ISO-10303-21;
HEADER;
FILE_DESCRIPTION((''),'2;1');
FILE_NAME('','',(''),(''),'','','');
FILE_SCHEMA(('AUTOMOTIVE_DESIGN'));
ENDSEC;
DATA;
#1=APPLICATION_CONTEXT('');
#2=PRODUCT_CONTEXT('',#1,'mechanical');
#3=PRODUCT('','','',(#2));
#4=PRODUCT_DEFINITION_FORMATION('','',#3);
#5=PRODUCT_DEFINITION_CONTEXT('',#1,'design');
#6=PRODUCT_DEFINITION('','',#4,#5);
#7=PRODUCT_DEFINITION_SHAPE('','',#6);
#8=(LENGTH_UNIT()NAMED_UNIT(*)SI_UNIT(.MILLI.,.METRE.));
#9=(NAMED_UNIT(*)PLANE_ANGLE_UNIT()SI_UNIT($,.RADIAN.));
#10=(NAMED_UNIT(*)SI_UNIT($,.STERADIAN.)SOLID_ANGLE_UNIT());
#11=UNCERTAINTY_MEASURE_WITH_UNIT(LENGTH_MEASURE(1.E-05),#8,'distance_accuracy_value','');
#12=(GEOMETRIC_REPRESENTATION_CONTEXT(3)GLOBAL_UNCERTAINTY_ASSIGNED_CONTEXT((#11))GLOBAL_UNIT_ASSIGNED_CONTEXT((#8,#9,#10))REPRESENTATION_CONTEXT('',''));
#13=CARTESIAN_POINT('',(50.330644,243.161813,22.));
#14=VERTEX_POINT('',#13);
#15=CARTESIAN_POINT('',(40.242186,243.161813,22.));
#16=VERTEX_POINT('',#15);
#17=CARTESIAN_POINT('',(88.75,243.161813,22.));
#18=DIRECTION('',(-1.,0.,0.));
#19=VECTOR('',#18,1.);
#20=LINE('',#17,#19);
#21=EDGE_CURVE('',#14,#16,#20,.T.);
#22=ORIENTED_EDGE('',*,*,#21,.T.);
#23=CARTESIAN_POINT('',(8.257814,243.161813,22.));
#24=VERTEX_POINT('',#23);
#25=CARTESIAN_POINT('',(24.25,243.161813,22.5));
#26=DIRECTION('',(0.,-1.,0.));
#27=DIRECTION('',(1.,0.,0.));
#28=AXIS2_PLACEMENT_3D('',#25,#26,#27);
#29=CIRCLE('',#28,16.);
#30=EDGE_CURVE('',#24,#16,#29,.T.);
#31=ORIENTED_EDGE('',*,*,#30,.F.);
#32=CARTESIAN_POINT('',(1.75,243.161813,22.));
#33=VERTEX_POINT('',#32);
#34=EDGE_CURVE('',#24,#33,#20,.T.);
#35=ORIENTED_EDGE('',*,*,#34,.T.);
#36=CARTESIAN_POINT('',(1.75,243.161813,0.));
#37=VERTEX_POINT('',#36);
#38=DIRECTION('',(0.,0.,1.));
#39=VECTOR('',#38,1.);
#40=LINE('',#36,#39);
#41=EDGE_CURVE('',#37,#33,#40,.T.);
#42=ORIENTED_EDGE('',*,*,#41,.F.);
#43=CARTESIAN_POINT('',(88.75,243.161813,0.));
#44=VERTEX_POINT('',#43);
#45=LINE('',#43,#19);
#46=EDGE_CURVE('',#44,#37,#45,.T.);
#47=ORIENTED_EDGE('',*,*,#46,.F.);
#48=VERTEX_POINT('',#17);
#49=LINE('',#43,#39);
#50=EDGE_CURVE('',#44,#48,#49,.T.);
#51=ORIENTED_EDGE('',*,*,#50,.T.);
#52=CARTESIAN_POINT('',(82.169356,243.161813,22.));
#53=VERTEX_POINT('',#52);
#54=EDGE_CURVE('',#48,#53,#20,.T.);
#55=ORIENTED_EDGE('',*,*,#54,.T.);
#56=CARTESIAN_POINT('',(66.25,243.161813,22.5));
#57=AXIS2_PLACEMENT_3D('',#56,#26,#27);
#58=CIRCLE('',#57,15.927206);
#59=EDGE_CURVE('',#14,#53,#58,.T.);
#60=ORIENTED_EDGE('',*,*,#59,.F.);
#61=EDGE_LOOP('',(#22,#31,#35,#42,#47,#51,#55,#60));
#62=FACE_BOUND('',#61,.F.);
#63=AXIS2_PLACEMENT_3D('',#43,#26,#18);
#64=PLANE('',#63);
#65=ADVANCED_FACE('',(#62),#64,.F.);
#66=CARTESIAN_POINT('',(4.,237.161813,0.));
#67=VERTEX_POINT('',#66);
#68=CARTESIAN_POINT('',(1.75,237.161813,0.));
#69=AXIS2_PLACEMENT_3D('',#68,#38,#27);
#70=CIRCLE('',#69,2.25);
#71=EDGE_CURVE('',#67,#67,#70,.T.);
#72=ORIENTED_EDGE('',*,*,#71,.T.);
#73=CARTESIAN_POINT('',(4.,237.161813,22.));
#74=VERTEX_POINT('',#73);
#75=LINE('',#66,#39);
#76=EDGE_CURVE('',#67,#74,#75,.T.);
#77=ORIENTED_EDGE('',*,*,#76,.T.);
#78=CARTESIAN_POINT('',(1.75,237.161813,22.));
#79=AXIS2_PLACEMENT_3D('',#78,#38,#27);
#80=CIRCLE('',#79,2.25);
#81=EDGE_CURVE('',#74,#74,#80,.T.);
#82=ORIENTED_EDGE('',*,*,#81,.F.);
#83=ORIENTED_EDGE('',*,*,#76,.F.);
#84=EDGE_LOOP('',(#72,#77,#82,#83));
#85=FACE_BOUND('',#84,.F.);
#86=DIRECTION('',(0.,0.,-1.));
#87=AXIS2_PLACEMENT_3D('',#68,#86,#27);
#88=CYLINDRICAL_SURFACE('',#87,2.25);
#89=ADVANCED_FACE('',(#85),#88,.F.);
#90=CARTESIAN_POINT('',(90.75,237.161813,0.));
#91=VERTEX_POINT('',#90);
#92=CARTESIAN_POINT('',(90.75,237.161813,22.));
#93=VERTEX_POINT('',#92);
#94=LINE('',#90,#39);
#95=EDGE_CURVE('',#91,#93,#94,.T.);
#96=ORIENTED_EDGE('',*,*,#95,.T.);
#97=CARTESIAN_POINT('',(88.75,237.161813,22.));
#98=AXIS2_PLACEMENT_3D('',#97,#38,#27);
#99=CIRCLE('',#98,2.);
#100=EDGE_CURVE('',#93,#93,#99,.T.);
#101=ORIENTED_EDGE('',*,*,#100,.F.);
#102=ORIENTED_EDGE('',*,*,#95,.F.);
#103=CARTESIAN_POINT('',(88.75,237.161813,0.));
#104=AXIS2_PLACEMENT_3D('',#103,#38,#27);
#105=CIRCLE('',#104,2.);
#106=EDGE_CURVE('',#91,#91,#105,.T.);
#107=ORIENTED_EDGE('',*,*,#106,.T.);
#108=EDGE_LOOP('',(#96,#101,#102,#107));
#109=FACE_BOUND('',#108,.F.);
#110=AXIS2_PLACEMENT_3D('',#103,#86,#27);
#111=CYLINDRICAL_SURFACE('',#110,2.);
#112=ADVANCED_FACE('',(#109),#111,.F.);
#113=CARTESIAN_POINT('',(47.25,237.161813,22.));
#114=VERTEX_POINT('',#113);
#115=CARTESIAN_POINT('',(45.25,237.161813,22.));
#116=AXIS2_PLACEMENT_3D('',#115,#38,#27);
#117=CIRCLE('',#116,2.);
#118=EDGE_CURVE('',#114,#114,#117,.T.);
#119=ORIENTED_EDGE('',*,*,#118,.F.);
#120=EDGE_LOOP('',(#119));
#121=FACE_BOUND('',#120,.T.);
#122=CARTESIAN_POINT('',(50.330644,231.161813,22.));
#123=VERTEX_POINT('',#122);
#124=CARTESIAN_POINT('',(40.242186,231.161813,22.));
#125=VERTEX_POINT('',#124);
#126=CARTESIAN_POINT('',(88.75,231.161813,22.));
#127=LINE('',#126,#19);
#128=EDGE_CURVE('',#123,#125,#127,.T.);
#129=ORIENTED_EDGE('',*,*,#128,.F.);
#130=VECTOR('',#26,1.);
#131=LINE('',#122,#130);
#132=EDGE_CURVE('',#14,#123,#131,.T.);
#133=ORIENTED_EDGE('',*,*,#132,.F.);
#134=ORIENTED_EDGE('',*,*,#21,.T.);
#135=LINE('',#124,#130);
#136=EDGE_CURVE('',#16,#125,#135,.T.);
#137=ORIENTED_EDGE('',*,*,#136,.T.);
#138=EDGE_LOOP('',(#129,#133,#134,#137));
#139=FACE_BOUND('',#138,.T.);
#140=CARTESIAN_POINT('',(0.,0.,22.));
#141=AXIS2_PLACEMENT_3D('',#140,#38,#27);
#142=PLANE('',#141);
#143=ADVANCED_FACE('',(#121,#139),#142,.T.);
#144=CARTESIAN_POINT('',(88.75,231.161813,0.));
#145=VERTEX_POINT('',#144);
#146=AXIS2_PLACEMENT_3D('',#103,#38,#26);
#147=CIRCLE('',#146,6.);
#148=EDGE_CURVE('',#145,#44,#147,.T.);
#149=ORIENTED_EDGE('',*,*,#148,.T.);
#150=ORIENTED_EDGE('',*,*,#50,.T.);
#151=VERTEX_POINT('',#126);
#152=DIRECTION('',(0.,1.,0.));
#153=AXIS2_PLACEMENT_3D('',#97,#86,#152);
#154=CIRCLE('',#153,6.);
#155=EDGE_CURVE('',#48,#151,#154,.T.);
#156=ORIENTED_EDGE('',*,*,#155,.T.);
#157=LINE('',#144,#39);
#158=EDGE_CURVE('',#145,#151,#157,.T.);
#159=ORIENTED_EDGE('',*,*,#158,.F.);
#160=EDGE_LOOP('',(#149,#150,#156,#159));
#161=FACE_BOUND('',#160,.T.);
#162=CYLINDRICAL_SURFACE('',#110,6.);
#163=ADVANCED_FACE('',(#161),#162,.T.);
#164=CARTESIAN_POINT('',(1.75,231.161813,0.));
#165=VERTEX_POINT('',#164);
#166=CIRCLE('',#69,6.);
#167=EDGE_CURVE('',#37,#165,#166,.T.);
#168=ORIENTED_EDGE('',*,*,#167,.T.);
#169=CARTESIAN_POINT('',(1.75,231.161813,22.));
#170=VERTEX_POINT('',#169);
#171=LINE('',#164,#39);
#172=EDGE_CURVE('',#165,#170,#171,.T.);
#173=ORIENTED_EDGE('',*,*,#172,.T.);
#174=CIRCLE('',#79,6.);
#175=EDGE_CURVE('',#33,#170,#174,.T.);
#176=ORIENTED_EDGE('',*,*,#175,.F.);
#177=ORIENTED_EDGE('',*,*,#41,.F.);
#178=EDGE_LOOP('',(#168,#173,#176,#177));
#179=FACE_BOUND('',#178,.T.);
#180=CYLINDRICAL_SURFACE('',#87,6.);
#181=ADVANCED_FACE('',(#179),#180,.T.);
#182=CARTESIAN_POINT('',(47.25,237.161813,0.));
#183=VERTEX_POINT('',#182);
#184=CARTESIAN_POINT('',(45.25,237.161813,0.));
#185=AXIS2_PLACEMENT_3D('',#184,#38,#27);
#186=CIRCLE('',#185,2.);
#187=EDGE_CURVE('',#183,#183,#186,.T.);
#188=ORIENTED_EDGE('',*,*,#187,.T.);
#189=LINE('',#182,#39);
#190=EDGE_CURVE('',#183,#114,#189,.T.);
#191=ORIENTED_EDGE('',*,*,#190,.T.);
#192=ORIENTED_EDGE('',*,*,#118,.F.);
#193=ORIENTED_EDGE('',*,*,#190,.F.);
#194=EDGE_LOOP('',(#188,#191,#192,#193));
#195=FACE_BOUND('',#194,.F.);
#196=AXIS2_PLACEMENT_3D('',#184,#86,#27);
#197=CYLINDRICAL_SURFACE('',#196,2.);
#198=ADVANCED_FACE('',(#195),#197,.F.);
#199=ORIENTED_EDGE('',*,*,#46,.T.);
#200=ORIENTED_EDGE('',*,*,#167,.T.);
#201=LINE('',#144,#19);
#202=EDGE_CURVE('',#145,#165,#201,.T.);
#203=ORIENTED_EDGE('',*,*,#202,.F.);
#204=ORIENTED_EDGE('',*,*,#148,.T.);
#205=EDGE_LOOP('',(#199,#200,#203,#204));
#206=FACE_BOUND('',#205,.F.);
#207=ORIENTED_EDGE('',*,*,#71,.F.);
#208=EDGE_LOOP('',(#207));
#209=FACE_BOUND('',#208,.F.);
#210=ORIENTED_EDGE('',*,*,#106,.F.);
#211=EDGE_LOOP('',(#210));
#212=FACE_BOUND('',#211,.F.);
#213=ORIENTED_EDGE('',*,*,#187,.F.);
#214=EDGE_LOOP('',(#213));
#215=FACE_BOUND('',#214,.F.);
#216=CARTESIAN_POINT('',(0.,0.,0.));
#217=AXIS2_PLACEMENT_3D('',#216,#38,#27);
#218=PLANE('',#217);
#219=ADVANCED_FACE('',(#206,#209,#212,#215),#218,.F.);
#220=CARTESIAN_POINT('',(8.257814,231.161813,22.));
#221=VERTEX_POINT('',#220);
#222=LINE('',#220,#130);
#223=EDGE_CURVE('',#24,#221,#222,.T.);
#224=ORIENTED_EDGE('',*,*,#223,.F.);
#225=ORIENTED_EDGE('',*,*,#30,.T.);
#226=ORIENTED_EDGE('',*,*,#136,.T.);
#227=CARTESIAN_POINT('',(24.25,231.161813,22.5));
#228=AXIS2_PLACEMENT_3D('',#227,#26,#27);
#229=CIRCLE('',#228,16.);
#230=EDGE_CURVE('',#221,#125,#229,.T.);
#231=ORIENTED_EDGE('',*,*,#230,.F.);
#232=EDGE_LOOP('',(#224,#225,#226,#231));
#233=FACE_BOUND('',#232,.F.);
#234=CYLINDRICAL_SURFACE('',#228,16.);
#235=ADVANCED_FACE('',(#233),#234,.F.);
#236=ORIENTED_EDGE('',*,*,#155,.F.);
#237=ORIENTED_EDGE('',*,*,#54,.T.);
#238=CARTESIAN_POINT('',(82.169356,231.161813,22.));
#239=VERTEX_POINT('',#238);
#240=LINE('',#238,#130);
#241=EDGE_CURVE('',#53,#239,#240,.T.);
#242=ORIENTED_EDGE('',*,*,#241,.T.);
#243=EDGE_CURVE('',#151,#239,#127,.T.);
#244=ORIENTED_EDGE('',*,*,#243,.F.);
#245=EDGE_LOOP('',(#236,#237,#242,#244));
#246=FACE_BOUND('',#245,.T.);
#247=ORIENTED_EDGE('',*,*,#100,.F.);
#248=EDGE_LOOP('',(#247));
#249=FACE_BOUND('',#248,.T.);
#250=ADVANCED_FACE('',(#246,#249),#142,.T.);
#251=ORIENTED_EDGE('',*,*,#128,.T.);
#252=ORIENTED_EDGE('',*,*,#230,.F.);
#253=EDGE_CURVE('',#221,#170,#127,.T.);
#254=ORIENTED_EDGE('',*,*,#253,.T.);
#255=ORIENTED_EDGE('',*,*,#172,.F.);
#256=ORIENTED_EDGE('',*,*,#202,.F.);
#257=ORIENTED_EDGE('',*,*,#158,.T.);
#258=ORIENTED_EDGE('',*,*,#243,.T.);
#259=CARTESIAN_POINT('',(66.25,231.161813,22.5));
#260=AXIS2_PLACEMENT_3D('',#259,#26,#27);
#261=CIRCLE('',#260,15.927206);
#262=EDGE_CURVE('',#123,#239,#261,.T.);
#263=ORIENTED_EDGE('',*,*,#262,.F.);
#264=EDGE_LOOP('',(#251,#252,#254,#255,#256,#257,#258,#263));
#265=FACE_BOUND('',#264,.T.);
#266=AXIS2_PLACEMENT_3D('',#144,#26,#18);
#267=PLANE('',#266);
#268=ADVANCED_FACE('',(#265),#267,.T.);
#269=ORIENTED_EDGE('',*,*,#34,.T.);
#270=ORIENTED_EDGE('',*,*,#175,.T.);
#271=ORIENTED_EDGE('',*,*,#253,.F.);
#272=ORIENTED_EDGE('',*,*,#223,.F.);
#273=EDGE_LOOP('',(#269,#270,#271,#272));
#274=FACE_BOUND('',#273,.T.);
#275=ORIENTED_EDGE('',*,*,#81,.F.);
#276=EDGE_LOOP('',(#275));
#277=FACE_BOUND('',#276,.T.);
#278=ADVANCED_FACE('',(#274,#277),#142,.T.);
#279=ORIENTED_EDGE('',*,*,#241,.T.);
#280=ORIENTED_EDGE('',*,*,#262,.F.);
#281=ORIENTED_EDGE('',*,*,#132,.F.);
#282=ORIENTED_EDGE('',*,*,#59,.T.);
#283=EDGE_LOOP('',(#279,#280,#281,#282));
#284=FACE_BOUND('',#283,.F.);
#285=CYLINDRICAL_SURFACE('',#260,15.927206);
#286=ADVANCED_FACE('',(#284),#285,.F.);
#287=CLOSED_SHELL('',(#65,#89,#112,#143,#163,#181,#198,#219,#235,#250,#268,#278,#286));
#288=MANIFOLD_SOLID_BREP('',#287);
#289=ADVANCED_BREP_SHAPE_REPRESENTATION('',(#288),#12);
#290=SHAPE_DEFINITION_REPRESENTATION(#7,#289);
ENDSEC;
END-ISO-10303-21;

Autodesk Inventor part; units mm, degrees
ref_plane "YZ Plane" through (0, 0, 0) normal (1, 0, 0) x (0, 1, 0)
ref_plane "XZ Plane" through (0, 0, 0) normal (0, 1, 0) x (-1, 0, 0)
ref_plane "XY Plane" through (0, 0, 0) normal (0, 0, 1) x (1, 0, 0)
sketch "Szkic1" plane through (0, 0, 0) normal (0, 0, 1) x (1, 0, 0)
  arc A0 (85.75, 216.779101) -> (95.75, 226.779101) centre (85.75, 226.779101) ccw
  line L0 (85.75, 216.779101) -> (83.25, 216.779101)
  arc A1 (83.25, 216.779101) -> (53.25, 186.779101) centre (83.25, 186.779101) ccw
  line L1 (53.25, 186.779101) -> (53.25, -39)
  arc A2 (46.25, -46) -> (53.25, -39) centre (46.25, -39) ccw
  line L2 (-1.25, -46) -> (46.25, -46)
  arc A3 (-8.916667, 45.356612) -> (-1.25, -46) centre (-1.25, 0) ccw
  arc A4 (-8.916667, 45.356612) -> (-7.25, 47.328638) centre (-9.25, 47.328638) ccw
  line L3 (-7.25, 400) -> (-7.25, 47.328638)
  arc A5 (27.038691, 446) -> (-7.25, 400) centre (40.75, 400) ccw
  line L4 (85.75, 446) -> (27.038691, 446)
  arc A6 (95.75, 436) -> (85.75, 446) centre (85.75, 436) ccw
  line L5 (95.75, 226.779101) -> (95.75, 436)
  circle A7 centre (46.75, 361.06) radius 2
  circle A8 centre (40.75, 400) radius 23.333333
  circle A9 centre (85.75, 438.7) radius 2
  circle A10 centre (85.75, 361.06) radius 2
  circle A11 centre (46.75, 438.7) radius 2
  circle A12 centre (-10.958284, -29.879026) radius 2.1
  circle A13 centre (-32.666667, 0) radius 2.1
  circle A14 centre (24.166617, -18.466253) radius 2.1
  circle A15 centre (-10.958284, 29.879026) radius 2.1
  circle A16 centre (24.166617, 18.466253) radius 2.1
  circle A17 centre (-1.25, 0) radius 23.333333
  circle A18 centre (1.75, 302.77336) radius 2.25
  circle A19 centre (1.75, 237.161813) radius 2.25
  circle A20 centre (43.75, 127.673594) radius 2
  circle A21 centre (4.75, -38.7) radius 2
  circle A22 centre (4.75, 38.94) radius 2
  circle A23 centre (4.75, 127.673594) radius 2
  circle A24 centre (43.75, -38.7) radius 2
  circle A25 centre (43.75, 38.94) radius 2
  circle A26 centre (45.25, 237.161813) radius 2
  circle A27 centre (88.75, 302.77336) radius 2
  circle A28 centre (45.25, 302.77336) radius 2
  circle A29 centre (88.75, 237.161813) radius 2
  circle A30 centre (66.166617, 381.533747) radius 2.1
  circle A31 centre (66.166617, 418.466253) radius 2.1
  circle A32 centre (31.041716, 370.120974) radius 2.1
  circle A33 centre (31.041716, 429.879026) radius 2.1
  circle A34 centre (9.333333, 400) radius 2.1
  circle A35 centre (88.75, 237.161813) radius 6
  circle A36 centre (1.75, 237.161813) radius 6
  line L6 (88.75, 231.161813) -> (1.75, 231.161813)
  line L7 (88.75, 243.161813) -> (1.75, 243.161813)
  point P0 (0, 0)
  dimension "d0" = 12
  dimension "d1" = 12
extrude "Wyciągnięcie proste1" add sketch "Szkic1" along normal blind 22 contours A35 | A35 L6 A36 L7 | A36
sketch "Szkic2" plane through (1.75, 231.161813, 0) normal (0, -1, 0) x (1, 0, 0)
  circle A0 centre (64.5, 22.5) radius 16
  circle A1 centre (64.5, 22.5) radius 15.927206
  circle A2 centre (22.5, 22.5) radius 16
  circle A3 centre (64.5, 22.5) radius 16
  point P0 (-1.75, 0)
sketch "Szkic2 outline for Wyciągnięcie proste2" plane through (1.75, 231.161813, 0) normal (0, -1, 0) x (1, 0, 0)
  circle A0 centre (22.5, 22.5) radius 16
  circle A1 centre (64.5, 22.5) radius 15.927206
extrude "Wyciągnięcie proste2" cut sketch "Szkic2 outline for Wyciągnięcie proste2" against normal through all
properties part number "uchwyt_na_silniki_v2"
